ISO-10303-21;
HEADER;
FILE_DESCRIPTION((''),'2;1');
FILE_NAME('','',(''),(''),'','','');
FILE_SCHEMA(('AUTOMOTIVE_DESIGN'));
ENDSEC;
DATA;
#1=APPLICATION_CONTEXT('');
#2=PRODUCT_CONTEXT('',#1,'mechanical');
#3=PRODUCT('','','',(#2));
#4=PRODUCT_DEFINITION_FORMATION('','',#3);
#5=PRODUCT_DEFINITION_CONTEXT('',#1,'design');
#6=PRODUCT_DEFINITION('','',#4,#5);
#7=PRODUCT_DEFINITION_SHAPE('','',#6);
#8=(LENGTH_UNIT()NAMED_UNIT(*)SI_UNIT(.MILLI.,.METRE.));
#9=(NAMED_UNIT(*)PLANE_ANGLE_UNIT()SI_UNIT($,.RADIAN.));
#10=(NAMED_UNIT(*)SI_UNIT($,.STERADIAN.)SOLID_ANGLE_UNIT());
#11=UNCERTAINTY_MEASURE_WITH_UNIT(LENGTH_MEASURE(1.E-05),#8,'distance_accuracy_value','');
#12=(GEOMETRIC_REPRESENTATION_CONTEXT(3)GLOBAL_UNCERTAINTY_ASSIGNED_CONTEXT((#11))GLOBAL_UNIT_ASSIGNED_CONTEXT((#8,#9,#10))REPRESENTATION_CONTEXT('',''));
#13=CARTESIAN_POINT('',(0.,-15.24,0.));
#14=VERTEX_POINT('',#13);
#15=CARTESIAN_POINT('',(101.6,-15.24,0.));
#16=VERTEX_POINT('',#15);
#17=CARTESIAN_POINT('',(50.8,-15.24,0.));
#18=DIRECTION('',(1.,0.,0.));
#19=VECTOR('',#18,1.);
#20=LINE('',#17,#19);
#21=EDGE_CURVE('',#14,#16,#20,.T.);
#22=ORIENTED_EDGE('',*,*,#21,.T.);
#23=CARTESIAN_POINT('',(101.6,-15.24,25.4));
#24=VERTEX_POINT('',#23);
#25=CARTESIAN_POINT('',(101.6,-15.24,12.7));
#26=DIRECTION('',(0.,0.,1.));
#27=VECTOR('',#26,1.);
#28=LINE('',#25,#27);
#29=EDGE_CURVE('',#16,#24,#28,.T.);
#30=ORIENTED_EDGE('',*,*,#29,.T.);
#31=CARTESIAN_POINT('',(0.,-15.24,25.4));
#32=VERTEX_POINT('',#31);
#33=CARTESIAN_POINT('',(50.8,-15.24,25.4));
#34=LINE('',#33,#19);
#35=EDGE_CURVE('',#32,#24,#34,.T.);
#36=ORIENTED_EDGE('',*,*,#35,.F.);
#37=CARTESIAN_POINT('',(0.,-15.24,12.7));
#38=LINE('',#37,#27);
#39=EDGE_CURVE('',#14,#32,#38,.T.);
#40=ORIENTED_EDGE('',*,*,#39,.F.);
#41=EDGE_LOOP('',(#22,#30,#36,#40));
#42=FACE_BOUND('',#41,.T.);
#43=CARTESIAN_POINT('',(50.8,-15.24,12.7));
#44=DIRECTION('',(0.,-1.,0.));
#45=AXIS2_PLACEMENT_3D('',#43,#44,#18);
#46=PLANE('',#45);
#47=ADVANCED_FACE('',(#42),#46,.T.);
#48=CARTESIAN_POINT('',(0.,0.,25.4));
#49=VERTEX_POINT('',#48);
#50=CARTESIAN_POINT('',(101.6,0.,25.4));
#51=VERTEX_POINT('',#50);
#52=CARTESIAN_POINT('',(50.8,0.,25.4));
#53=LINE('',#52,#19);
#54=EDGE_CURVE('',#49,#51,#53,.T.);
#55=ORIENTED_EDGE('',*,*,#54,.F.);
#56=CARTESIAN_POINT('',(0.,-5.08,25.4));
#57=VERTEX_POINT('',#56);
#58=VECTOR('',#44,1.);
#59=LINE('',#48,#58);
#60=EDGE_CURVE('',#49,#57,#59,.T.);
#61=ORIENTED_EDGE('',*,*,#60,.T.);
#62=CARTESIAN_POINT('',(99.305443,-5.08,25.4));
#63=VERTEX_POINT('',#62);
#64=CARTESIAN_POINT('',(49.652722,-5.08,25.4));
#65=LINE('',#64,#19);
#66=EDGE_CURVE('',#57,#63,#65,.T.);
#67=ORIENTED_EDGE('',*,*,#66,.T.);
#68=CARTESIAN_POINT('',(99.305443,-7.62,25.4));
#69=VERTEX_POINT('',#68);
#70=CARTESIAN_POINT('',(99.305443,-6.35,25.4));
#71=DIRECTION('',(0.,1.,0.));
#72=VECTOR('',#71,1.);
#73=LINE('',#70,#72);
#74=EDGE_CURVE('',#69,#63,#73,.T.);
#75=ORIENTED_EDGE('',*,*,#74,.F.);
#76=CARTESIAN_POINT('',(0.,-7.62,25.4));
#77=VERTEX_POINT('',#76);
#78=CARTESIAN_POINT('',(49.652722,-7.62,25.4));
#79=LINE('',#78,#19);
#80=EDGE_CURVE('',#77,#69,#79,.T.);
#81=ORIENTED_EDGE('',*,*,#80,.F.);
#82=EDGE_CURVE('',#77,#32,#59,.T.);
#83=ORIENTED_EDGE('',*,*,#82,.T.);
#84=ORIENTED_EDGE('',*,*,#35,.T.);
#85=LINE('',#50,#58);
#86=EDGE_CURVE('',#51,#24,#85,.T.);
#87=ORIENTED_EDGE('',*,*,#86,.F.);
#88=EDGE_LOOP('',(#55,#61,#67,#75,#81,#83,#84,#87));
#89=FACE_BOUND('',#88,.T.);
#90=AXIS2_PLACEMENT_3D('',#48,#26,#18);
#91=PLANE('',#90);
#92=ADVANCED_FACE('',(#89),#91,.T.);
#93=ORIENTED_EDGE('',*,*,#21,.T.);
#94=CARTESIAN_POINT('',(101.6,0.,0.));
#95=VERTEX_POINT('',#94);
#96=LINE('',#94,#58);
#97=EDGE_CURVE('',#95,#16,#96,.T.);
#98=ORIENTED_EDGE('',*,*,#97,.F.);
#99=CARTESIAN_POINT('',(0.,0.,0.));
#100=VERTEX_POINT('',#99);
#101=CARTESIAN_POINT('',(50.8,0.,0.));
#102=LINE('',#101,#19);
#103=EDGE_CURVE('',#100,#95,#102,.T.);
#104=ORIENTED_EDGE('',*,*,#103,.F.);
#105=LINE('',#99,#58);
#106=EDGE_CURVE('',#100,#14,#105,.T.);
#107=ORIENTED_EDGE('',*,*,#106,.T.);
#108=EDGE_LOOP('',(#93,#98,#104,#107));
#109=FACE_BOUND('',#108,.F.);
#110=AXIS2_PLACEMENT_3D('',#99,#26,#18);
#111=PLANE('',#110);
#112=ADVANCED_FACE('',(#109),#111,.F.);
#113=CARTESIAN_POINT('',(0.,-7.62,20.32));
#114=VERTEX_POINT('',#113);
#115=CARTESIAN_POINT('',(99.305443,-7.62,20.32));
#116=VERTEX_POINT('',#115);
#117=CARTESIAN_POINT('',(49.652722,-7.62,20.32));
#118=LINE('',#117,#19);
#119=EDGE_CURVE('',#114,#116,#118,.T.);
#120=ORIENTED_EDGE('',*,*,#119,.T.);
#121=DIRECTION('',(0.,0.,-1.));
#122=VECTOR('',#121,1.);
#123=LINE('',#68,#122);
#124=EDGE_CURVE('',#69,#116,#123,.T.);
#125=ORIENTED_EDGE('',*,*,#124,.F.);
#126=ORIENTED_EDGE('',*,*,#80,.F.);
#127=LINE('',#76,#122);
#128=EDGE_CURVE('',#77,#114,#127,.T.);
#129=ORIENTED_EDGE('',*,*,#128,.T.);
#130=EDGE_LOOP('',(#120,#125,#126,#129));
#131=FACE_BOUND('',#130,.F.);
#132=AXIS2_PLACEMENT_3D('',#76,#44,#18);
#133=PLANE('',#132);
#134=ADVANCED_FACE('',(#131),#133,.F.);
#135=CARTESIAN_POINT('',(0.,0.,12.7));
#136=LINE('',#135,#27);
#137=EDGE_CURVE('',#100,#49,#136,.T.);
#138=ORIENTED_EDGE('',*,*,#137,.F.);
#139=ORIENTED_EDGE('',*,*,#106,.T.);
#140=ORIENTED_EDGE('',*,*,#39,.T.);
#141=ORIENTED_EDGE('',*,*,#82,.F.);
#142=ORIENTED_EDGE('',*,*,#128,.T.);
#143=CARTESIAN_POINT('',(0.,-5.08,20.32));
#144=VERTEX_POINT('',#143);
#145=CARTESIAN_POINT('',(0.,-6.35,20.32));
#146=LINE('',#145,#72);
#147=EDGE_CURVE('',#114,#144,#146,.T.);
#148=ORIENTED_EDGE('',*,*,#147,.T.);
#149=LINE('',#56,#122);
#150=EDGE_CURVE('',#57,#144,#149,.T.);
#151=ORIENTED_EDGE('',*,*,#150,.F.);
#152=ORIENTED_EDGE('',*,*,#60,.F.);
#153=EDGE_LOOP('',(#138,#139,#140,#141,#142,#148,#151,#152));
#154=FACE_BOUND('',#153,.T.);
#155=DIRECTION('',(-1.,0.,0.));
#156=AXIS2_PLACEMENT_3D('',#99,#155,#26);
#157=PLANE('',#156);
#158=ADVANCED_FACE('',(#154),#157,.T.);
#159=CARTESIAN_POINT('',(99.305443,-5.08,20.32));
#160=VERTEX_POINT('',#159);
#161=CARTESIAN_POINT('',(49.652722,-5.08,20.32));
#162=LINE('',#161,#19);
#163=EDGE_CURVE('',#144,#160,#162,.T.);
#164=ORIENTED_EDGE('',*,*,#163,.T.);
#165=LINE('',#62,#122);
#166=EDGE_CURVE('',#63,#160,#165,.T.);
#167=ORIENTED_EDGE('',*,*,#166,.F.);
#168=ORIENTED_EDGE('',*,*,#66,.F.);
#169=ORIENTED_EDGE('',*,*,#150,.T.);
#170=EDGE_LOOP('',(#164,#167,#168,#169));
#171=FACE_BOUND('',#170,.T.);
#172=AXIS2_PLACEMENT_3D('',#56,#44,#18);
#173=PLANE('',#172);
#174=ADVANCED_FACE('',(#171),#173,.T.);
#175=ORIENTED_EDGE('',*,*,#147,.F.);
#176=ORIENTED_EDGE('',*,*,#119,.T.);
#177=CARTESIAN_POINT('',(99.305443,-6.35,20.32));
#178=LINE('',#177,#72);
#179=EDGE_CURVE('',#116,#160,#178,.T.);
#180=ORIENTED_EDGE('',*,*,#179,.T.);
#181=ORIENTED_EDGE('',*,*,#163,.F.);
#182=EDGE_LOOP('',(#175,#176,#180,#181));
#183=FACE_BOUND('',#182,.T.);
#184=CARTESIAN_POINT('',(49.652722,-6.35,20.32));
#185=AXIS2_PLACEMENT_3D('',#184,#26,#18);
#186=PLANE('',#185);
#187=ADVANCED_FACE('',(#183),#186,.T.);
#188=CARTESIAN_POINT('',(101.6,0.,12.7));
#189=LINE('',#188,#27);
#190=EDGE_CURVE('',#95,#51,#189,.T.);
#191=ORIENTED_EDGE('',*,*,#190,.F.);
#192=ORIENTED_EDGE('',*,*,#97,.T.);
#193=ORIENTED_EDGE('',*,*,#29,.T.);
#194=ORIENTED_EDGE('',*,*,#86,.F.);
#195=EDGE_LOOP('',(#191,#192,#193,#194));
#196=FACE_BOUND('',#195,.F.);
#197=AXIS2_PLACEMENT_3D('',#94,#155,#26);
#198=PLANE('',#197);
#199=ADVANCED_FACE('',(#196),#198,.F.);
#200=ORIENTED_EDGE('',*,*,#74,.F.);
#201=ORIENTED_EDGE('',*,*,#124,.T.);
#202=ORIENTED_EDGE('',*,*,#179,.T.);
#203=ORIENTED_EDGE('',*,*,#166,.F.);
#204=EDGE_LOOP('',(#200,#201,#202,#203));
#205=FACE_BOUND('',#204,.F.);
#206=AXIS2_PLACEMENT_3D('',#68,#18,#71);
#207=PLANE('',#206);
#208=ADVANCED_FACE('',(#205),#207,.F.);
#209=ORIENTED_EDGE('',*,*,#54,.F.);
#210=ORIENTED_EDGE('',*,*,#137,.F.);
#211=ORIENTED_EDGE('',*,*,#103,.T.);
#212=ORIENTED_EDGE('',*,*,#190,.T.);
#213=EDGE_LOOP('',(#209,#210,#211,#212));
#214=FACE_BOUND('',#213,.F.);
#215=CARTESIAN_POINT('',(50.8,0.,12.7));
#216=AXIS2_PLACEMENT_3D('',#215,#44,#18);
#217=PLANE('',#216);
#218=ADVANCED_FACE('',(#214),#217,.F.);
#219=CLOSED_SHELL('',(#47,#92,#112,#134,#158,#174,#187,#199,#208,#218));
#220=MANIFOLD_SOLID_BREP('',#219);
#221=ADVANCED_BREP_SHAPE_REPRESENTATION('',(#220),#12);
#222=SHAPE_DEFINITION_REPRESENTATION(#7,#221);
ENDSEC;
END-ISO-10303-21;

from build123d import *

# Parameters (mm, degrees)
F0_W     = 101.6
F0_H     = 25.4
F1_DEPTH = 15.24
F2_W     = 99.3054434657
F2_H     = 2.54
F3_DEPTH = 5.08


# Not quite as in the source:
# - the program builds the solid bodies; features that only make, move or delete a surface that nothing else refers to are left out


with BuildPart() as f1:
    # F0 (on Front) → F1 (new body)
    with BuildSketch(Plane.XZ):
        with Locations((50.8, 12.7)):
            Rectangle(F0_W, F0_H)
    extrude(amount=F1_DEPTH)

    # F2 (on face) → F3 (cut)
    with BuildSketch(Plane.XY.offset(25.4)):
        with Locations((49.6527217329, -6.35)):
            Rectangle(F2_W, F2_H)
    extrude(amount=-F3_DEPTH, mode=Mode.SUBTRACT)


solid = f1.part
